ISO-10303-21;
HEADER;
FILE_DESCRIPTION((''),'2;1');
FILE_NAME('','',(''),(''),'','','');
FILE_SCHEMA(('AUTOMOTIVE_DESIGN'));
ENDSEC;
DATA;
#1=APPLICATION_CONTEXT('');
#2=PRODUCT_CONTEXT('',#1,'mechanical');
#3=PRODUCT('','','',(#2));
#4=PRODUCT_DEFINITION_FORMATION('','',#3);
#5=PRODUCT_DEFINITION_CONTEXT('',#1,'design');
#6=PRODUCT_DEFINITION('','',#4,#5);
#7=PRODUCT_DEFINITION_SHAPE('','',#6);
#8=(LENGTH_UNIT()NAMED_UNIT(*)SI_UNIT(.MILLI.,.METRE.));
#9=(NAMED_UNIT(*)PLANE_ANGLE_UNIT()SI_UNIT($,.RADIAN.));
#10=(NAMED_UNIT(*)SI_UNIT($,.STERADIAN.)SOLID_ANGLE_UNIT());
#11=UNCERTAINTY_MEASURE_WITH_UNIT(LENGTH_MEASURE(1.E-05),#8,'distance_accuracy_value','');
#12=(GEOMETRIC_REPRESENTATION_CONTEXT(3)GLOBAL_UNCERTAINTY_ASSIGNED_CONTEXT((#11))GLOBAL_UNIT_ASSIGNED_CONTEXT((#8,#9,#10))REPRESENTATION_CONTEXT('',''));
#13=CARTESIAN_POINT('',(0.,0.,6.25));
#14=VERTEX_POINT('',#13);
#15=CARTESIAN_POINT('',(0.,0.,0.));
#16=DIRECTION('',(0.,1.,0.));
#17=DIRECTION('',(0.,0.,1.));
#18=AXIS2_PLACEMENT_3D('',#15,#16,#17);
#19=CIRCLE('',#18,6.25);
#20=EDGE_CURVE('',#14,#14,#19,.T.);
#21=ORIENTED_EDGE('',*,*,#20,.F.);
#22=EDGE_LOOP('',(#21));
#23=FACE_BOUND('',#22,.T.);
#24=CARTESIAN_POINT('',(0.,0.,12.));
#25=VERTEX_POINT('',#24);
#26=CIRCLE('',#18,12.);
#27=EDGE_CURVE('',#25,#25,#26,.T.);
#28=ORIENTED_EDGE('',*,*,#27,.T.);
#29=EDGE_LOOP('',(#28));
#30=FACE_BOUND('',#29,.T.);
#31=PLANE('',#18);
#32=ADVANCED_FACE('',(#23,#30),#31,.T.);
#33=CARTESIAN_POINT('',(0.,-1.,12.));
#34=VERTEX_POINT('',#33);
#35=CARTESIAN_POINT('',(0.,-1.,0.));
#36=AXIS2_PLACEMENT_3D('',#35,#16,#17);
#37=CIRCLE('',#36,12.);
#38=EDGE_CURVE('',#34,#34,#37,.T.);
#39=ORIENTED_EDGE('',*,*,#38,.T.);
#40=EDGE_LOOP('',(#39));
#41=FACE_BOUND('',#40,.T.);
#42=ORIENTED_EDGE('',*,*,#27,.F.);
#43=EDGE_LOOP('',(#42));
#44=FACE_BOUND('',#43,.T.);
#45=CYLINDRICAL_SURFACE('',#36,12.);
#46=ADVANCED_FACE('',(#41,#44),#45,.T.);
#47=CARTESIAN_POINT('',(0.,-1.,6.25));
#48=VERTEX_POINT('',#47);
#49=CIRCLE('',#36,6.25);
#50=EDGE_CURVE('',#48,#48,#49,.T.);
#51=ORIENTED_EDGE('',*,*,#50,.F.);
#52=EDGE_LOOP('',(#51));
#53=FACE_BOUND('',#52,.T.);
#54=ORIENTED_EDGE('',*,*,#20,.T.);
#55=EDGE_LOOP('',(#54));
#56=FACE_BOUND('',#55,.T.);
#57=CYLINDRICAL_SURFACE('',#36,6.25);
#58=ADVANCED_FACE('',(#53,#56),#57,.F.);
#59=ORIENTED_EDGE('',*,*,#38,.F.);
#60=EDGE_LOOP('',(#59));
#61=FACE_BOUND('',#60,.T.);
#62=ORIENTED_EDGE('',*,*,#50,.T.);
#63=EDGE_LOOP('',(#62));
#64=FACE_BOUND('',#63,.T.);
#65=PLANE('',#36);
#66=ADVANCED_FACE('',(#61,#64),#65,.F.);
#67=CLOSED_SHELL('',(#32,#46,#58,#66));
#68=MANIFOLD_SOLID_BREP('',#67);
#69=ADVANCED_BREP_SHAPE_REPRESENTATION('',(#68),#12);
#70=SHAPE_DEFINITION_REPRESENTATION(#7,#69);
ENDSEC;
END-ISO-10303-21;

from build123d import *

# Parameters (mm, degrees)
SKETCH1_R          = 12
SKETCH1_R_2        = 6.25
BASE_FLANGE1_DEPTH = 1


# Sheet-metal steps are written as plain solids
with BuildPart() as part:
    # Sketch1 → Base-Flange1 (new body)
    with BuildSketch(Plane(origin=(0, 0, 0), x_dir=(1, 0, 0), z_dir=(0, 1, 0))):
        with Locations(Location((0, 0, 0), (0, 0, 270))):
            Circle(SKETCH1_R)
        with Locations(Location((0, 0, 0), (0, 0, 270))):
            Circle(SKETCH1_R_2, mode=Mode.SUBTRACT)
    extrude(amount=-BASE_FLANGE1_DEPTH)


solid = part.part
